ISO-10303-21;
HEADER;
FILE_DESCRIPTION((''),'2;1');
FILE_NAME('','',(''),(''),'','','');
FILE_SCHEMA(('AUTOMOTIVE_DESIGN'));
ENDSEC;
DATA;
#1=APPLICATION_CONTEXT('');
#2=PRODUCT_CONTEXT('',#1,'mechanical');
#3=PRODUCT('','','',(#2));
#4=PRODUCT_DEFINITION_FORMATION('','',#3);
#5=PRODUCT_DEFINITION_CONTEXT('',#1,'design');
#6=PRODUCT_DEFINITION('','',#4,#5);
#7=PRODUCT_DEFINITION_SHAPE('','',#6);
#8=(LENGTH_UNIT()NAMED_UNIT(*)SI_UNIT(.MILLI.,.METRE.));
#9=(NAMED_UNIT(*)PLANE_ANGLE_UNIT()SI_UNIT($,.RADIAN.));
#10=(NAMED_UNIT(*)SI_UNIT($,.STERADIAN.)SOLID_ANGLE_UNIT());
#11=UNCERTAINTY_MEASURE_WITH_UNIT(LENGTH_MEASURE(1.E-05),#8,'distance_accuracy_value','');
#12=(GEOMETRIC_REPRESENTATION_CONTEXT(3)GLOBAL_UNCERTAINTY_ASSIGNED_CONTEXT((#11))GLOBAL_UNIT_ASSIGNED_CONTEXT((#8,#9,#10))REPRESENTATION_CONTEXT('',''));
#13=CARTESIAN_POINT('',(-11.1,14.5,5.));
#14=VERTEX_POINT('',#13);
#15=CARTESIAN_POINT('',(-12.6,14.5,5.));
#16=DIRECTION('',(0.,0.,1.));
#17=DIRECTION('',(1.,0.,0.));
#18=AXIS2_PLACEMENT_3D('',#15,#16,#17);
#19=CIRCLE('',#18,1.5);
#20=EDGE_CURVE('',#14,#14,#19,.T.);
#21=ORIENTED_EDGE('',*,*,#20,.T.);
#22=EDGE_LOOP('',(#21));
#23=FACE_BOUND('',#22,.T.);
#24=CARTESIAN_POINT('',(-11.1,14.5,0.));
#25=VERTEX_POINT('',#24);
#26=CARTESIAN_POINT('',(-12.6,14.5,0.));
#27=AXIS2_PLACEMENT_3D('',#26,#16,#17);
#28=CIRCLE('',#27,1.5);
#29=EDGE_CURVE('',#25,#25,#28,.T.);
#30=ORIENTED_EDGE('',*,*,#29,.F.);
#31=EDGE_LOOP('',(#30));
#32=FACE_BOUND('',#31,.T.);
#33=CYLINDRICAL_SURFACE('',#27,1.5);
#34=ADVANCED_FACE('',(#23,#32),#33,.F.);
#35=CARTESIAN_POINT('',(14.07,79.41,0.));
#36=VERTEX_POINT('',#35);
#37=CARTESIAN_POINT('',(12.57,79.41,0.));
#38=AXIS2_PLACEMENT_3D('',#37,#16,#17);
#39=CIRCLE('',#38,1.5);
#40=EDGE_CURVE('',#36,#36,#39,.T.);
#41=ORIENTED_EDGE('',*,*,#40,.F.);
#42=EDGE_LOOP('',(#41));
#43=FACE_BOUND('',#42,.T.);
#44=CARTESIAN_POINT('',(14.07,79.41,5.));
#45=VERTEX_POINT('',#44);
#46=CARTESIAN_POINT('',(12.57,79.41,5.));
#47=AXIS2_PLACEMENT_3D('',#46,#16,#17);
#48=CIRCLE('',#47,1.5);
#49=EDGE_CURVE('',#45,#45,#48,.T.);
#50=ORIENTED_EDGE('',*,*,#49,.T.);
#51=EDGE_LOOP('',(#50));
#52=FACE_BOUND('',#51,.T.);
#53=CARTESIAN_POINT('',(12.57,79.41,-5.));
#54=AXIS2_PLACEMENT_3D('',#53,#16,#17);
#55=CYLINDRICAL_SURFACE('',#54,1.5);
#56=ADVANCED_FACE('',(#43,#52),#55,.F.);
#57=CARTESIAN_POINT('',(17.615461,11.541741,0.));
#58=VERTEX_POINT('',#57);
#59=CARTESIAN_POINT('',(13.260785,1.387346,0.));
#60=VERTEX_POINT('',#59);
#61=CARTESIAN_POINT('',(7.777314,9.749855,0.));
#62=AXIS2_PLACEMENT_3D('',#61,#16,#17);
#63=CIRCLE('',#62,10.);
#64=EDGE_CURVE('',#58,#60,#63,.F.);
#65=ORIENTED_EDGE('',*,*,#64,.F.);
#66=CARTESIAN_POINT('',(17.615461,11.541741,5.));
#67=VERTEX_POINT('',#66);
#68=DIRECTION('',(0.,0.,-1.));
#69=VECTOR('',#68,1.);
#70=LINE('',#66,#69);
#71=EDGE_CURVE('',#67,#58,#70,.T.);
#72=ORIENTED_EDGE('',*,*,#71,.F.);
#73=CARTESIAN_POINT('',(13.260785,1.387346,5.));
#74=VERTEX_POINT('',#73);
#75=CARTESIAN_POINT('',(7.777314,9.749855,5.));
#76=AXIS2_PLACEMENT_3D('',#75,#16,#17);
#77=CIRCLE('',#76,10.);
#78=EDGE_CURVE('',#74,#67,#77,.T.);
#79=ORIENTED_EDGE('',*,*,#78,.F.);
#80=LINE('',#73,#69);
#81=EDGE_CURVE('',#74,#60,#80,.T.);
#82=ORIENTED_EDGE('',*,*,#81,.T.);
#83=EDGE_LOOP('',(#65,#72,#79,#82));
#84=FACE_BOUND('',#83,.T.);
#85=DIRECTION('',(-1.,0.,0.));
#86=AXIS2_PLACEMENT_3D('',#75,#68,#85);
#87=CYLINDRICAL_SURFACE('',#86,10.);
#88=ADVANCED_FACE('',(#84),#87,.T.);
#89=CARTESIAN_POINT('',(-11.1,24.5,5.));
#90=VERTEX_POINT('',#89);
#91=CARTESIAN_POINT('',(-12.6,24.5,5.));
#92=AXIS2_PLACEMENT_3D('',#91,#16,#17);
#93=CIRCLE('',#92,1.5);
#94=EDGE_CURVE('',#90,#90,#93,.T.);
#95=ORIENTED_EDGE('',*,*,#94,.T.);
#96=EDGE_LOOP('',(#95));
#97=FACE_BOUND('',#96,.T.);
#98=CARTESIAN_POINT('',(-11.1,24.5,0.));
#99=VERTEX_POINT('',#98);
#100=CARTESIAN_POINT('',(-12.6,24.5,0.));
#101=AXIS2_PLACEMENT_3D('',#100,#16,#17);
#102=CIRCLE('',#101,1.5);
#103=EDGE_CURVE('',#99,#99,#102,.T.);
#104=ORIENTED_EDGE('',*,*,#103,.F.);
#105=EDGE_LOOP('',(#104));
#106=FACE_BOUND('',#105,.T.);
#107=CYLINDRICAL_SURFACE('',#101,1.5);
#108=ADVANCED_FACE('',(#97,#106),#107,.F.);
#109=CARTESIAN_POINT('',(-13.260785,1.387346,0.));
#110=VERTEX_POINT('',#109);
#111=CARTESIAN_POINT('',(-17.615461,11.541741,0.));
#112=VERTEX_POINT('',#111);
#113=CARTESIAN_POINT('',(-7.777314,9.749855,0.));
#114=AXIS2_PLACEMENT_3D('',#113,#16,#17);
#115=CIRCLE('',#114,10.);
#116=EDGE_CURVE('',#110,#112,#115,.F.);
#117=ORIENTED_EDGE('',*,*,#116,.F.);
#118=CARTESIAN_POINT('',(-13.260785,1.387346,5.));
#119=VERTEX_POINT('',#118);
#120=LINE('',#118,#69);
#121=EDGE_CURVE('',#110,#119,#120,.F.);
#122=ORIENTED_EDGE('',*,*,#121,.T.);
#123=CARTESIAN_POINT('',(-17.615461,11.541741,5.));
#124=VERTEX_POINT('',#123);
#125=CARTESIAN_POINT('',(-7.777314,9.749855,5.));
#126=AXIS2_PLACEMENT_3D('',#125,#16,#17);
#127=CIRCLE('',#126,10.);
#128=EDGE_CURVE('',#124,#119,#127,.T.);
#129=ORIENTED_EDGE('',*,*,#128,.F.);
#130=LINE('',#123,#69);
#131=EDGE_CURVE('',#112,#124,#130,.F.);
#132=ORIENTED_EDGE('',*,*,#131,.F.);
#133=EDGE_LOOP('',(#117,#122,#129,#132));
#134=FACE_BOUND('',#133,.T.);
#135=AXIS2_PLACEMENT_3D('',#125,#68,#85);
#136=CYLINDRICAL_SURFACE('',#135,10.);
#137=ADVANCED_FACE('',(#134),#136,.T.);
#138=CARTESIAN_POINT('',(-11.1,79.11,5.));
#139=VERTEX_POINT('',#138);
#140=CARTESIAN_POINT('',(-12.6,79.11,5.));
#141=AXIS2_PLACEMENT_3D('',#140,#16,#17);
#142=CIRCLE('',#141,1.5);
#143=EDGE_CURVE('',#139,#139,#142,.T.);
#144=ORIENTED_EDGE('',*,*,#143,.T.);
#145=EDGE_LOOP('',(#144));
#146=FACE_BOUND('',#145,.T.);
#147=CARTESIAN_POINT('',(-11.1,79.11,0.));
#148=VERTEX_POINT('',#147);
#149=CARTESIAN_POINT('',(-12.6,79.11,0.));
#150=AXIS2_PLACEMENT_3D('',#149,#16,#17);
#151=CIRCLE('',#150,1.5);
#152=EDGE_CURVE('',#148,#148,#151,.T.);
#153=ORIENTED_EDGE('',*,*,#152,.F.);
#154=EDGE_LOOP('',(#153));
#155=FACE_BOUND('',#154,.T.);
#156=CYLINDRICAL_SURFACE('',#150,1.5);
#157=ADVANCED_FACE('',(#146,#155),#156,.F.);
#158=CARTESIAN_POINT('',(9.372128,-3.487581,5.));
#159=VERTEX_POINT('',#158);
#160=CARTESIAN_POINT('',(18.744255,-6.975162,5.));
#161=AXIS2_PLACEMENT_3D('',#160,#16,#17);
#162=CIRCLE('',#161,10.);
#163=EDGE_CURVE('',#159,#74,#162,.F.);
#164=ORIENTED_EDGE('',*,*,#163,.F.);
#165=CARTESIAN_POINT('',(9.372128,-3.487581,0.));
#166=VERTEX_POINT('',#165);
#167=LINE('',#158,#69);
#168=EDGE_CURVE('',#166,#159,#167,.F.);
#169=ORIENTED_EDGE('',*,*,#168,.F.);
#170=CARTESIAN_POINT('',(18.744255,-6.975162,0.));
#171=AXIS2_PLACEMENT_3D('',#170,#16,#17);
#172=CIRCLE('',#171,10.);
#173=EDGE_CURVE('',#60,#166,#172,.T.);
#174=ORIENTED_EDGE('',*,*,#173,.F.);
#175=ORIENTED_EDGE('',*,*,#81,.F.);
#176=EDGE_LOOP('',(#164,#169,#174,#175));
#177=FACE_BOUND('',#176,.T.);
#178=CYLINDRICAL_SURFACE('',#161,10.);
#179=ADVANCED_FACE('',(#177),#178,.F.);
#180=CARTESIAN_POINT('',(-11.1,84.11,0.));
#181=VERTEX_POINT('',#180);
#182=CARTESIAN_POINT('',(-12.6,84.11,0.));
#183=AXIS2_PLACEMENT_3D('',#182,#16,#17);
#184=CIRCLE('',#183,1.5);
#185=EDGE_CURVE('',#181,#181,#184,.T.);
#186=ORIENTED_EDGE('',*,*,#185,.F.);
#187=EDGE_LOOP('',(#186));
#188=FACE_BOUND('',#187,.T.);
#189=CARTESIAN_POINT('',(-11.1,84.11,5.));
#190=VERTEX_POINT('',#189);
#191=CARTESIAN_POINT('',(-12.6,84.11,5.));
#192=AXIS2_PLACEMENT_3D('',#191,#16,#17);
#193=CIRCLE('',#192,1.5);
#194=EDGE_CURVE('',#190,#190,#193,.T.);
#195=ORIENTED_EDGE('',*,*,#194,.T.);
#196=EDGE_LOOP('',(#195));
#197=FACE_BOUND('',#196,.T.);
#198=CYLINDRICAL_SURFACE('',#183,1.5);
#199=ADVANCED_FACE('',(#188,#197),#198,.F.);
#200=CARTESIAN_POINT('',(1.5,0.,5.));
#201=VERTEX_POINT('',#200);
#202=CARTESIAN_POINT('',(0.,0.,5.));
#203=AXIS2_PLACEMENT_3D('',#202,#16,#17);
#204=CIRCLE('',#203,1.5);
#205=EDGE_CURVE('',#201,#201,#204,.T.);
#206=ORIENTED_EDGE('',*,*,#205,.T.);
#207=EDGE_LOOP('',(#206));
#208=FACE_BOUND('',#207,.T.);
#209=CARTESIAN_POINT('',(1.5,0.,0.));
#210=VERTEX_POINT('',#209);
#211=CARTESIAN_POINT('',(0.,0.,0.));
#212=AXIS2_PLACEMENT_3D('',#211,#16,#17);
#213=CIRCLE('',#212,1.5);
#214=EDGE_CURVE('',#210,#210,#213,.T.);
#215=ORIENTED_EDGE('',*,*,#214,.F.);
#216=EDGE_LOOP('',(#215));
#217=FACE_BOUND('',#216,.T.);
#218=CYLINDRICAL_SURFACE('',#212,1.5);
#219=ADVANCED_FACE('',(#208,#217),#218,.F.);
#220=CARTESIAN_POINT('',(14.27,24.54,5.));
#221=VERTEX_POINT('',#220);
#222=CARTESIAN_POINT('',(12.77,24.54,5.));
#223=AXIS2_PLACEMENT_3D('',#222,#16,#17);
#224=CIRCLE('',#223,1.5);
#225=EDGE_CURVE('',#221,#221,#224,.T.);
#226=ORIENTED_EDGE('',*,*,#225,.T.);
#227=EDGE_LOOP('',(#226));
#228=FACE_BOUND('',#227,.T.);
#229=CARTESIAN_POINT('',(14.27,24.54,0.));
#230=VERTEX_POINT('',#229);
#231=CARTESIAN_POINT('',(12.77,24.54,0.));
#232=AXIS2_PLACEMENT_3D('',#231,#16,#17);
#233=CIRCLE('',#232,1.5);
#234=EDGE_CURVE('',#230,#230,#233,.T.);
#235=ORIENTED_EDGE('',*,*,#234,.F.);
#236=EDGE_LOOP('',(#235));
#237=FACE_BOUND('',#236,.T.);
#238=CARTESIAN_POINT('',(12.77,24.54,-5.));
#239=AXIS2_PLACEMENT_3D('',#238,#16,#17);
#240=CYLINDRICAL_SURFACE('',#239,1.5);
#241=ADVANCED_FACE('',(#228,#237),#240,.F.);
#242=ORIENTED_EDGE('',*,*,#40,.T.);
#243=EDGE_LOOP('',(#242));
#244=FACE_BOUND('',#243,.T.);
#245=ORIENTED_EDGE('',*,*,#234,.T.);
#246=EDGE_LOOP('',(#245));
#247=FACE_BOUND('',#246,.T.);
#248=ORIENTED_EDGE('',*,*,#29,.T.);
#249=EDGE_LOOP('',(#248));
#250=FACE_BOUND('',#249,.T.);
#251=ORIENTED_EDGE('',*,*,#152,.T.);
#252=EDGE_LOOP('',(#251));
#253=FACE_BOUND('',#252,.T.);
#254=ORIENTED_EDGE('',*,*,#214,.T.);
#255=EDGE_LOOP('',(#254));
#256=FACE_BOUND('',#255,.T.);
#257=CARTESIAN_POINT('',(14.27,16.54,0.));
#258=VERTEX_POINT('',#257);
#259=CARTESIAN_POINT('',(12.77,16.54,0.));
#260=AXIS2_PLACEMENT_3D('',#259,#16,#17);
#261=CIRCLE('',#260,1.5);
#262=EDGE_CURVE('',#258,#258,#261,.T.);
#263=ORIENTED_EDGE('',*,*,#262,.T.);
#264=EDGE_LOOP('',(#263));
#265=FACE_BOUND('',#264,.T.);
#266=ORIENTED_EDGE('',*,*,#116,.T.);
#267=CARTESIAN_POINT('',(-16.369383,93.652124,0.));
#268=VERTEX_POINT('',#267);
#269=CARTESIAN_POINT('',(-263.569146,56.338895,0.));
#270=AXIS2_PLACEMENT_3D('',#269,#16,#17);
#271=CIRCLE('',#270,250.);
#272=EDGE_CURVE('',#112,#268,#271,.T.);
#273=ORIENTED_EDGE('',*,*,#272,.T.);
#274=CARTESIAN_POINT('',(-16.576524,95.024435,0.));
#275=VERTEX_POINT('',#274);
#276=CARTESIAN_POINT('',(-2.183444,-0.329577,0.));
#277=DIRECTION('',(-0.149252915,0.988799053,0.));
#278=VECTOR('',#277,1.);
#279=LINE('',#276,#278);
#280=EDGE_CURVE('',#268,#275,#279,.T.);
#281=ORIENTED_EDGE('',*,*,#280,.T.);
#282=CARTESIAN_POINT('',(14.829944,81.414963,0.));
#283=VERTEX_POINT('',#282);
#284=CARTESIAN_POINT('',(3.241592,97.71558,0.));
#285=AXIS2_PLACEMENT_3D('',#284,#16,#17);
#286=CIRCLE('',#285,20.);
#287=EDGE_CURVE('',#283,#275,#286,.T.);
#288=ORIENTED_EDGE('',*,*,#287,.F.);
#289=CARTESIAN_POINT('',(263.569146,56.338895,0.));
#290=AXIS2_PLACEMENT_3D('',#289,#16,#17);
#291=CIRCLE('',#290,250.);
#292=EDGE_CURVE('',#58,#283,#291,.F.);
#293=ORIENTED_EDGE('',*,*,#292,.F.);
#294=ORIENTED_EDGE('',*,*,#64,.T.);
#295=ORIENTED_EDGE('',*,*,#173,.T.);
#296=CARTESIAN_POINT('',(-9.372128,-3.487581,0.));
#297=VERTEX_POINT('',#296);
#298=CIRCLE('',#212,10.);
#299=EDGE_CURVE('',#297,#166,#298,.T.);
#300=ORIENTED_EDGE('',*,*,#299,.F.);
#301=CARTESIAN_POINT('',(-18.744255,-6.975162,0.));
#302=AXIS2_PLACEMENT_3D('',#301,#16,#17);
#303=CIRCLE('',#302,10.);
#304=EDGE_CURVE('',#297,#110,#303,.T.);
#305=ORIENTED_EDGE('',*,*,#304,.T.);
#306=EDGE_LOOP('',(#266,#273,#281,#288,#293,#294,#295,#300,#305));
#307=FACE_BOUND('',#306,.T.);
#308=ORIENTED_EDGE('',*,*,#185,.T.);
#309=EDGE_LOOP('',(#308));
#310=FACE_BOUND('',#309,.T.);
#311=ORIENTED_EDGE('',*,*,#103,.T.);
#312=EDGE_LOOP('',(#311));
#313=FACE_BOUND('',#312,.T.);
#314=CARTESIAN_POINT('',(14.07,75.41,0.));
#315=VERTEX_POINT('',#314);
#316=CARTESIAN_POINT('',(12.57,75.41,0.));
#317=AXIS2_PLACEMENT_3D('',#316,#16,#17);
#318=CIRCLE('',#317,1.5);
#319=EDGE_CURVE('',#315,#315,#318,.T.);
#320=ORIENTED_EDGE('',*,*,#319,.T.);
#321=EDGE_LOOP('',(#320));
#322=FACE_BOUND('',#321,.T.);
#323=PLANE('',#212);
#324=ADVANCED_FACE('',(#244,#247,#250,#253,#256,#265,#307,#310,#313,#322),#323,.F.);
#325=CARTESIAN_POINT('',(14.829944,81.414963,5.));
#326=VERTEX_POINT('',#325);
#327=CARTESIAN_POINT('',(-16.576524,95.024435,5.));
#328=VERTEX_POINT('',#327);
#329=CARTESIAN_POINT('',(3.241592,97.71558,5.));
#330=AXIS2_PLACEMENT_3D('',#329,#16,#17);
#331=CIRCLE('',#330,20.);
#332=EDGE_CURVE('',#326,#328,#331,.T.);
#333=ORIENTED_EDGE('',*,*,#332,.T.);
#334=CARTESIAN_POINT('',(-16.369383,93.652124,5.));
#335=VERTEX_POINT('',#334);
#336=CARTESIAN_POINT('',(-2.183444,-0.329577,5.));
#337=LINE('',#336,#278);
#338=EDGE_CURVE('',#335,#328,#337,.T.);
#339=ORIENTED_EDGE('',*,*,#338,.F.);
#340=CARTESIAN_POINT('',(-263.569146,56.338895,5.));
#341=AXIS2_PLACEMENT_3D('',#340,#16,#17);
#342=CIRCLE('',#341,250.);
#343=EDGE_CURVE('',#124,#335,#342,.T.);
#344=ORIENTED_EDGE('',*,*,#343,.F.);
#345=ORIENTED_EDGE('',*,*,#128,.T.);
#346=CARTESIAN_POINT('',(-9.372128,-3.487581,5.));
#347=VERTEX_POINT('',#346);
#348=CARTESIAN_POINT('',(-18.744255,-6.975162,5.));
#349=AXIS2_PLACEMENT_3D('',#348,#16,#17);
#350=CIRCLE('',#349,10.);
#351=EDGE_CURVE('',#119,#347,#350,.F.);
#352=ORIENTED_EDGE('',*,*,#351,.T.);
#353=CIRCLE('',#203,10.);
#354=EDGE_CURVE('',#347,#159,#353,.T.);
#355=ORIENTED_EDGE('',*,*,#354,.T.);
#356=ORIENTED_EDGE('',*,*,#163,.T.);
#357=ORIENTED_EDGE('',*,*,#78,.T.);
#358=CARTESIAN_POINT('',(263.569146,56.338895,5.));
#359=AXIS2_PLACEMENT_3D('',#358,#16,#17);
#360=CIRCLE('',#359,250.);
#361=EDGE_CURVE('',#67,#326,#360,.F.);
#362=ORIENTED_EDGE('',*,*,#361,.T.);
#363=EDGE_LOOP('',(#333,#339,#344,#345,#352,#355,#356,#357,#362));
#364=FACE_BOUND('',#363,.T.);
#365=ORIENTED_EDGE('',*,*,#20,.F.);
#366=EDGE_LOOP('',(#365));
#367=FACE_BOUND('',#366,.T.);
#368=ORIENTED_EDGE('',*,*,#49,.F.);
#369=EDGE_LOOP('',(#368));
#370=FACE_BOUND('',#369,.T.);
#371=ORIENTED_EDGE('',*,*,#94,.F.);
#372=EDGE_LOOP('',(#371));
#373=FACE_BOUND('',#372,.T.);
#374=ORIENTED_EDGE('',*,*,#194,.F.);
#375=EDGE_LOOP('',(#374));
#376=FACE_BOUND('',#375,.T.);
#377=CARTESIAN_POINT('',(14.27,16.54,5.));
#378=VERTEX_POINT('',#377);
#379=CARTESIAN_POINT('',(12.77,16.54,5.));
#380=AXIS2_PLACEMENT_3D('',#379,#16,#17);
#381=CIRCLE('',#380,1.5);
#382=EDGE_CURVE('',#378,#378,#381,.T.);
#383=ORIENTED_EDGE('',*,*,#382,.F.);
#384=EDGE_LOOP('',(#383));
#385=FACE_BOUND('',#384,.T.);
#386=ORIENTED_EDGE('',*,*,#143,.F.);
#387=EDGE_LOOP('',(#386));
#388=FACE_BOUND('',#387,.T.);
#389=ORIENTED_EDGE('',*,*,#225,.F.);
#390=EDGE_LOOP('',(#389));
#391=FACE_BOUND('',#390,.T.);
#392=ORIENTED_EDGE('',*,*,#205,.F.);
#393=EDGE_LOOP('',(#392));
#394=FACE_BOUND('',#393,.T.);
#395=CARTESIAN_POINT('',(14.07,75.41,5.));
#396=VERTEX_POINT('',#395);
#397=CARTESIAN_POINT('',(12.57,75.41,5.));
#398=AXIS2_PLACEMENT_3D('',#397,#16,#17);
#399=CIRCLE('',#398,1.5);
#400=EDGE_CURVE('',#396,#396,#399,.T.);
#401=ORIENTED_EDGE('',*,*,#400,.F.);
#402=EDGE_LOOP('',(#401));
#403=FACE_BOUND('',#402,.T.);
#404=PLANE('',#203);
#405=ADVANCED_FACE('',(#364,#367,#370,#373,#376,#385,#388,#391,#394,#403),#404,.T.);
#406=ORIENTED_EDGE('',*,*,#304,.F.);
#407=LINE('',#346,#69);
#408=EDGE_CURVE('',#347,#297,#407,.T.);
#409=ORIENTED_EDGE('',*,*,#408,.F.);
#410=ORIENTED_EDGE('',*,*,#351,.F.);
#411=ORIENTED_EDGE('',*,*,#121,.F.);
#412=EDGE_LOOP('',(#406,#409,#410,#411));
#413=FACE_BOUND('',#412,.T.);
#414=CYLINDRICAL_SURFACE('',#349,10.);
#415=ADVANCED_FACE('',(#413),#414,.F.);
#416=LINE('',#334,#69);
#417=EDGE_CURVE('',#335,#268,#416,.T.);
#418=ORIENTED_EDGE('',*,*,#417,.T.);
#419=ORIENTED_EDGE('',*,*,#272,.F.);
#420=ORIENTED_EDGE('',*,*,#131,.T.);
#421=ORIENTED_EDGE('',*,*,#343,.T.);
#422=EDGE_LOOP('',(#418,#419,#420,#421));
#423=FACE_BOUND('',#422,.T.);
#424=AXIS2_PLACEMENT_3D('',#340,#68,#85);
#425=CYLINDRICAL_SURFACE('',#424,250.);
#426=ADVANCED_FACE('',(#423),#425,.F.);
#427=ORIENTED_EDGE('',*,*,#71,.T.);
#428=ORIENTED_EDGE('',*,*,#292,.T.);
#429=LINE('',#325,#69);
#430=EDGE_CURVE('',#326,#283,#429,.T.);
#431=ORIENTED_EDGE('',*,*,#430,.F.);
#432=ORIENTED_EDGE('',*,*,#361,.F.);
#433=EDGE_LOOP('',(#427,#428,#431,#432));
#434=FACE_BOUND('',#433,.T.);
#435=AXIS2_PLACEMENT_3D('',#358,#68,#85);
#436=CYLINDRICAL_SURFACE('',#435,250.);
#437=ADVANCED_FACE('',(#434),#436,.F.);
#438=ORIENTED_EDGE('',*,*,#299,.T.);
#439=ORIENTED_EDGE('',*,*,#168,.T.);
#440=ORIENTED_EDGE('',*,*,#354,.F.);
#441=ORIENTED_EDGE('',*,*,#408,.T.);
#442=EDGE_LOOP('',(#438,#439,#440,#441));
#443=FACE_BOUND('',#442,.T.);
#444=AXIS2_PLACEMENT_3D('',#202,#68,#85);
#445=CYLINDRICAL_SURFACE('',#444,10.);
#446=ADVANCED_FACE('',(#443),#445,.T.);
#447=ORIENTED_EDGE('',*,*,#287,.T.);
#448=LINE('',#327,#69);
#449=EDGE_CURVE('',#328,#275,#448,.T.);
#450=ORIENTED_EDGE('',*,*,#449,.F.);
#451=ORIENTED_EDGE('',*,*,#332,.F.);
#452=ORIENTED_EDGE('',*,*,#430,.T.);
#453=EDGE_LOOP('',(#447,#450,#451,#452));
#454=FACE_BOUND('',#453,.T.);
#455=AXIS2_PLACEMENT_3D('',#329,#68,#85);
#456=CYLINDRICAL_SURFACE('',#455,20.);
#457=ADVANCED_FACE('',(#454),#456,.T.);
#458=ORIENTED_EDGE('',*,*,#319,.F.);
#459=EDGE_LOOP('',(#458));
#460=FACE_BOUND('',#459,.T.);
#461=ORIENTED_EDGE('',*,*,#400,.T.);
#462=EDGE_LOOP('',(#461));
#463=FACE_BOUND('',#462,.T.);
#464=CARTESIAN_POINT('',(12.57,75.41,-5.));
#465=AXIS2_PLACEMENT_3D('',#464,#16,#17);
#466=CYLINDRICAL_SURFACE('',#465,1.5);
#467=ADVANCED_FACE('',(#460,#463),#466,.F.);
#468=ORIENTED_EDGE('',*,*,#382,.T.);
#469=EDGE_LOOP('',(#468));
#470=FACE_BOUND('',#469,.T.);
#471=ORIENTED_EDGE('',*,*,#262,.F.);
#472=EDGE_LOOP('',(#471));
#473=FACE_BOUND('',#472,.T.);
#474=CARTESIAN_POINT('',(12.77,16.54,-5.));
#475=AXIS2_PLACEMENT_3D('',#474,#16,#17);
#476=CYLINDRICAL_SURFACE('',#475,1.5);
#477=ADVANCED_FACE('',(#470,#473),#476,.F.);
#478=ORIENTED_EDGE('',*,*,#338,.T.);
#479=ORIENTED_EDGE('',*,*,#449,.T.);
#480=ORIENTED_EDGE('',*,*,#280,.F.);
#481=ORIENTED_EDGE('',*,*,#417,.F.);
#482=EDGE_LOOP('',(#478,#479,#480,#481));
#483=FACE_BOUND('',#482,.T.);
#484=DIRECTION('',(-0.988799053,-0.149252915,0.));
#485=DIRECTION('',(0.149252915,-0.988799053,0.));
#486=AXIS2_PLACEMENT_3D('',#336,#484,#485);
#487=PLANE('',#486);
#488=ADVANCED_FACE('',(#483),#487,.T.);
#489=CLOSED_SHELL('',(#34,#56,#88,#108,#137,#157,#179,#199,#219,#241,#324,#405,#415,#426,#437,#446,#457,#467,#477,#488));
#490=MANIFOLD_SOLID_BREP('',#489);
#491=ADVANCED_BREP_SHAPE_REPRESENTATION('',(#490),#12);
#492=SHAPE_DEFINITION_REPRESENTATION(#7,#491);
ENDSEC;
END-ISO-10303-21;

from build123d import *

# Parameters (mm, degrees)
RESSALTO_EXTRUS_O1_DEPTH = 5
FILETE3_R                = 10
FILETE4_R                = 10
ESBO_O2_R                = 1.5
CORTE_EXTRUS_O1_DEPTH    = 5
ESBO_O3_R                = 1.5
CORTE_EXTRUS_O2_DEPTH    = 121.092170275
ESBO_O4_R                = 1.5
CORTE_EXTRUS_O3_DEPTH    = 10


with BuildPart() as part:
    # Esboço1 → Ressalto-extrusão1 (new body)
    with BuildSketch(Plane.XY):
        with BuildLine():
            ThreePointArc((-10, 0), (0, -10), (10, 0))
            Line((10, 0), (20, 0))
            ThreePointArc((20, 0), (14.071698091, 40.495175194), (14.829943665, 81.414963086))
            ThreePointArc((14.829943665, 81.414963086), (11.193742071, 116.066691762), (-16.576524471, 95.024435265))
            Line((-16.576524471, 95.024435265), (-16.487894969, 94.437265709))
            Line((-16.487894969, 94.437265709), (-16.369382775, 93.652123615))
            ThreePointArc((-16.369382775, 93.652123615), (-13.756795166, 46.654405302), (-20, 0))
            Line((-20, 0), (-10, 0))
        make_face()
    extrude(amount=RESSALTO_EXTRUS_O1_DEPTH)

    # Filete3
    # the kernel refuses this fillet: 10 mm, written as the material it takes off along each edge
    with BuildSketch(Plane(origin=(20, 0, -29.463728433), x_dir=(-0.20232831186330175, 0.9793177493635794, 0), z_dir=(0, 0, 1))) as filete3_piece_1:
        with BuildLine():
            CenterArc((12.021201201, 9.997221658), FILETE3_R, 181.169168083, 87.480189)
            Line((2.023283119, 9.793177494), (1.823324757, 9.78909661))
            ThreePointArc((1.823324757, 9.78909661), (0.815778009, 4.937054409), (-0.19586355, 0.040465662))
            Line((-0.19586355, 0.040465662), (0.004714197, -0.199944433))
            ThreePointArc((0.004714197, -0.199944433), (5.892745687, -0.130541448), (11.780777177, -0.199944433))
            Line((11.780777177, -0.199944433), (11.785491373, 0))
        make_face()
    extrude(amount=63.927456867, mode=Mode.SUBTRACT)
    with BuildSketch(Plane(origin=(-20, 0, -29.463728433), x_dir=(1, 0, 0), z_dir=(0, 0, 1))) as filete3_piece_2:
        with BuildLine():
            CenterArc((12.222685959, 9.749854723), FILETE3_R, 169.67749742, 87.480189)
            Line((2.384538574, 11.541740887), (2.187775626, 11.57757861))
            ThreePointArc((2.187775626, 11.57757861), (1.06442773, 5.797282674), (-0.194855317, 0.045071116))
            Line((-0.194855317, 0.045071116), (0, -0.2))
            ThreePointArc((0, -0.2), (5, -0.2), (9.955546281, -0.194997094))
            Line((9.955546281, -0.194997094), (10, 0))
        make_face()
    extrude(amount=63.927456867, mode=Mode.SUBTRACT)

    # Filete4
    filete4_edges = [part.edges().sort_by_distance(p)[0] for p in [
        (10, 0, 2.5),
        (-10, 0, 2.5),
    ]]
    fillet(filete4_edges, radius=FILETE4_R)

    # Esboço2 → Corte-extrusão1 (cut)
    with BuildSketch(Plane.XY.offset(5)):
        Circle(ESBO_O2_R)
    extrude(amount=-CORTE_EXTRUS_O1_DEPTH, mode=Mode.SUBTRACT)

    # Esboço3 → Corte-extrusão2 (cut, through all)
    with BuildSketch(Plane.XY.offset(5)):
        with Locations((-12.6, 14.5)):
            Circle(ESBO_O3_R)
        with Locations((-12.6, 24.5)):
            Circle(ESBO_O3_R)
        with Locations((-12.6, 79.11)):
            Circle(ESBO_O3_R)
        with Locations((-12.6, 84.11)):
            Circle(ESBO_O3_R)
    extrude(amount=-CORTE_EXTRUS_O2_DEPTH, mode=Mode.SUBTRACT)

    # Esboço4 → Corte-extrusão3 (cut)
    with BuildSketch(Plane.XY.offset(5)):
        with Locations((12.57, 79.41)):
            Circle(ESBO_O4_R)
        with Locations((12.57, 75.41)):
            Circle(ESBO_O4_R)
        with Locations((12.77, 24.54)):
            Circle(ESBO_O4_R)
        with Locations((12.77, 16.54)):
            Circle(ESBO_O4_R)
    extrude(amount=-CORTE_EXTRUS_O3_DEPTH, mode=Mode.SUBTRACT)


solid = part.part
